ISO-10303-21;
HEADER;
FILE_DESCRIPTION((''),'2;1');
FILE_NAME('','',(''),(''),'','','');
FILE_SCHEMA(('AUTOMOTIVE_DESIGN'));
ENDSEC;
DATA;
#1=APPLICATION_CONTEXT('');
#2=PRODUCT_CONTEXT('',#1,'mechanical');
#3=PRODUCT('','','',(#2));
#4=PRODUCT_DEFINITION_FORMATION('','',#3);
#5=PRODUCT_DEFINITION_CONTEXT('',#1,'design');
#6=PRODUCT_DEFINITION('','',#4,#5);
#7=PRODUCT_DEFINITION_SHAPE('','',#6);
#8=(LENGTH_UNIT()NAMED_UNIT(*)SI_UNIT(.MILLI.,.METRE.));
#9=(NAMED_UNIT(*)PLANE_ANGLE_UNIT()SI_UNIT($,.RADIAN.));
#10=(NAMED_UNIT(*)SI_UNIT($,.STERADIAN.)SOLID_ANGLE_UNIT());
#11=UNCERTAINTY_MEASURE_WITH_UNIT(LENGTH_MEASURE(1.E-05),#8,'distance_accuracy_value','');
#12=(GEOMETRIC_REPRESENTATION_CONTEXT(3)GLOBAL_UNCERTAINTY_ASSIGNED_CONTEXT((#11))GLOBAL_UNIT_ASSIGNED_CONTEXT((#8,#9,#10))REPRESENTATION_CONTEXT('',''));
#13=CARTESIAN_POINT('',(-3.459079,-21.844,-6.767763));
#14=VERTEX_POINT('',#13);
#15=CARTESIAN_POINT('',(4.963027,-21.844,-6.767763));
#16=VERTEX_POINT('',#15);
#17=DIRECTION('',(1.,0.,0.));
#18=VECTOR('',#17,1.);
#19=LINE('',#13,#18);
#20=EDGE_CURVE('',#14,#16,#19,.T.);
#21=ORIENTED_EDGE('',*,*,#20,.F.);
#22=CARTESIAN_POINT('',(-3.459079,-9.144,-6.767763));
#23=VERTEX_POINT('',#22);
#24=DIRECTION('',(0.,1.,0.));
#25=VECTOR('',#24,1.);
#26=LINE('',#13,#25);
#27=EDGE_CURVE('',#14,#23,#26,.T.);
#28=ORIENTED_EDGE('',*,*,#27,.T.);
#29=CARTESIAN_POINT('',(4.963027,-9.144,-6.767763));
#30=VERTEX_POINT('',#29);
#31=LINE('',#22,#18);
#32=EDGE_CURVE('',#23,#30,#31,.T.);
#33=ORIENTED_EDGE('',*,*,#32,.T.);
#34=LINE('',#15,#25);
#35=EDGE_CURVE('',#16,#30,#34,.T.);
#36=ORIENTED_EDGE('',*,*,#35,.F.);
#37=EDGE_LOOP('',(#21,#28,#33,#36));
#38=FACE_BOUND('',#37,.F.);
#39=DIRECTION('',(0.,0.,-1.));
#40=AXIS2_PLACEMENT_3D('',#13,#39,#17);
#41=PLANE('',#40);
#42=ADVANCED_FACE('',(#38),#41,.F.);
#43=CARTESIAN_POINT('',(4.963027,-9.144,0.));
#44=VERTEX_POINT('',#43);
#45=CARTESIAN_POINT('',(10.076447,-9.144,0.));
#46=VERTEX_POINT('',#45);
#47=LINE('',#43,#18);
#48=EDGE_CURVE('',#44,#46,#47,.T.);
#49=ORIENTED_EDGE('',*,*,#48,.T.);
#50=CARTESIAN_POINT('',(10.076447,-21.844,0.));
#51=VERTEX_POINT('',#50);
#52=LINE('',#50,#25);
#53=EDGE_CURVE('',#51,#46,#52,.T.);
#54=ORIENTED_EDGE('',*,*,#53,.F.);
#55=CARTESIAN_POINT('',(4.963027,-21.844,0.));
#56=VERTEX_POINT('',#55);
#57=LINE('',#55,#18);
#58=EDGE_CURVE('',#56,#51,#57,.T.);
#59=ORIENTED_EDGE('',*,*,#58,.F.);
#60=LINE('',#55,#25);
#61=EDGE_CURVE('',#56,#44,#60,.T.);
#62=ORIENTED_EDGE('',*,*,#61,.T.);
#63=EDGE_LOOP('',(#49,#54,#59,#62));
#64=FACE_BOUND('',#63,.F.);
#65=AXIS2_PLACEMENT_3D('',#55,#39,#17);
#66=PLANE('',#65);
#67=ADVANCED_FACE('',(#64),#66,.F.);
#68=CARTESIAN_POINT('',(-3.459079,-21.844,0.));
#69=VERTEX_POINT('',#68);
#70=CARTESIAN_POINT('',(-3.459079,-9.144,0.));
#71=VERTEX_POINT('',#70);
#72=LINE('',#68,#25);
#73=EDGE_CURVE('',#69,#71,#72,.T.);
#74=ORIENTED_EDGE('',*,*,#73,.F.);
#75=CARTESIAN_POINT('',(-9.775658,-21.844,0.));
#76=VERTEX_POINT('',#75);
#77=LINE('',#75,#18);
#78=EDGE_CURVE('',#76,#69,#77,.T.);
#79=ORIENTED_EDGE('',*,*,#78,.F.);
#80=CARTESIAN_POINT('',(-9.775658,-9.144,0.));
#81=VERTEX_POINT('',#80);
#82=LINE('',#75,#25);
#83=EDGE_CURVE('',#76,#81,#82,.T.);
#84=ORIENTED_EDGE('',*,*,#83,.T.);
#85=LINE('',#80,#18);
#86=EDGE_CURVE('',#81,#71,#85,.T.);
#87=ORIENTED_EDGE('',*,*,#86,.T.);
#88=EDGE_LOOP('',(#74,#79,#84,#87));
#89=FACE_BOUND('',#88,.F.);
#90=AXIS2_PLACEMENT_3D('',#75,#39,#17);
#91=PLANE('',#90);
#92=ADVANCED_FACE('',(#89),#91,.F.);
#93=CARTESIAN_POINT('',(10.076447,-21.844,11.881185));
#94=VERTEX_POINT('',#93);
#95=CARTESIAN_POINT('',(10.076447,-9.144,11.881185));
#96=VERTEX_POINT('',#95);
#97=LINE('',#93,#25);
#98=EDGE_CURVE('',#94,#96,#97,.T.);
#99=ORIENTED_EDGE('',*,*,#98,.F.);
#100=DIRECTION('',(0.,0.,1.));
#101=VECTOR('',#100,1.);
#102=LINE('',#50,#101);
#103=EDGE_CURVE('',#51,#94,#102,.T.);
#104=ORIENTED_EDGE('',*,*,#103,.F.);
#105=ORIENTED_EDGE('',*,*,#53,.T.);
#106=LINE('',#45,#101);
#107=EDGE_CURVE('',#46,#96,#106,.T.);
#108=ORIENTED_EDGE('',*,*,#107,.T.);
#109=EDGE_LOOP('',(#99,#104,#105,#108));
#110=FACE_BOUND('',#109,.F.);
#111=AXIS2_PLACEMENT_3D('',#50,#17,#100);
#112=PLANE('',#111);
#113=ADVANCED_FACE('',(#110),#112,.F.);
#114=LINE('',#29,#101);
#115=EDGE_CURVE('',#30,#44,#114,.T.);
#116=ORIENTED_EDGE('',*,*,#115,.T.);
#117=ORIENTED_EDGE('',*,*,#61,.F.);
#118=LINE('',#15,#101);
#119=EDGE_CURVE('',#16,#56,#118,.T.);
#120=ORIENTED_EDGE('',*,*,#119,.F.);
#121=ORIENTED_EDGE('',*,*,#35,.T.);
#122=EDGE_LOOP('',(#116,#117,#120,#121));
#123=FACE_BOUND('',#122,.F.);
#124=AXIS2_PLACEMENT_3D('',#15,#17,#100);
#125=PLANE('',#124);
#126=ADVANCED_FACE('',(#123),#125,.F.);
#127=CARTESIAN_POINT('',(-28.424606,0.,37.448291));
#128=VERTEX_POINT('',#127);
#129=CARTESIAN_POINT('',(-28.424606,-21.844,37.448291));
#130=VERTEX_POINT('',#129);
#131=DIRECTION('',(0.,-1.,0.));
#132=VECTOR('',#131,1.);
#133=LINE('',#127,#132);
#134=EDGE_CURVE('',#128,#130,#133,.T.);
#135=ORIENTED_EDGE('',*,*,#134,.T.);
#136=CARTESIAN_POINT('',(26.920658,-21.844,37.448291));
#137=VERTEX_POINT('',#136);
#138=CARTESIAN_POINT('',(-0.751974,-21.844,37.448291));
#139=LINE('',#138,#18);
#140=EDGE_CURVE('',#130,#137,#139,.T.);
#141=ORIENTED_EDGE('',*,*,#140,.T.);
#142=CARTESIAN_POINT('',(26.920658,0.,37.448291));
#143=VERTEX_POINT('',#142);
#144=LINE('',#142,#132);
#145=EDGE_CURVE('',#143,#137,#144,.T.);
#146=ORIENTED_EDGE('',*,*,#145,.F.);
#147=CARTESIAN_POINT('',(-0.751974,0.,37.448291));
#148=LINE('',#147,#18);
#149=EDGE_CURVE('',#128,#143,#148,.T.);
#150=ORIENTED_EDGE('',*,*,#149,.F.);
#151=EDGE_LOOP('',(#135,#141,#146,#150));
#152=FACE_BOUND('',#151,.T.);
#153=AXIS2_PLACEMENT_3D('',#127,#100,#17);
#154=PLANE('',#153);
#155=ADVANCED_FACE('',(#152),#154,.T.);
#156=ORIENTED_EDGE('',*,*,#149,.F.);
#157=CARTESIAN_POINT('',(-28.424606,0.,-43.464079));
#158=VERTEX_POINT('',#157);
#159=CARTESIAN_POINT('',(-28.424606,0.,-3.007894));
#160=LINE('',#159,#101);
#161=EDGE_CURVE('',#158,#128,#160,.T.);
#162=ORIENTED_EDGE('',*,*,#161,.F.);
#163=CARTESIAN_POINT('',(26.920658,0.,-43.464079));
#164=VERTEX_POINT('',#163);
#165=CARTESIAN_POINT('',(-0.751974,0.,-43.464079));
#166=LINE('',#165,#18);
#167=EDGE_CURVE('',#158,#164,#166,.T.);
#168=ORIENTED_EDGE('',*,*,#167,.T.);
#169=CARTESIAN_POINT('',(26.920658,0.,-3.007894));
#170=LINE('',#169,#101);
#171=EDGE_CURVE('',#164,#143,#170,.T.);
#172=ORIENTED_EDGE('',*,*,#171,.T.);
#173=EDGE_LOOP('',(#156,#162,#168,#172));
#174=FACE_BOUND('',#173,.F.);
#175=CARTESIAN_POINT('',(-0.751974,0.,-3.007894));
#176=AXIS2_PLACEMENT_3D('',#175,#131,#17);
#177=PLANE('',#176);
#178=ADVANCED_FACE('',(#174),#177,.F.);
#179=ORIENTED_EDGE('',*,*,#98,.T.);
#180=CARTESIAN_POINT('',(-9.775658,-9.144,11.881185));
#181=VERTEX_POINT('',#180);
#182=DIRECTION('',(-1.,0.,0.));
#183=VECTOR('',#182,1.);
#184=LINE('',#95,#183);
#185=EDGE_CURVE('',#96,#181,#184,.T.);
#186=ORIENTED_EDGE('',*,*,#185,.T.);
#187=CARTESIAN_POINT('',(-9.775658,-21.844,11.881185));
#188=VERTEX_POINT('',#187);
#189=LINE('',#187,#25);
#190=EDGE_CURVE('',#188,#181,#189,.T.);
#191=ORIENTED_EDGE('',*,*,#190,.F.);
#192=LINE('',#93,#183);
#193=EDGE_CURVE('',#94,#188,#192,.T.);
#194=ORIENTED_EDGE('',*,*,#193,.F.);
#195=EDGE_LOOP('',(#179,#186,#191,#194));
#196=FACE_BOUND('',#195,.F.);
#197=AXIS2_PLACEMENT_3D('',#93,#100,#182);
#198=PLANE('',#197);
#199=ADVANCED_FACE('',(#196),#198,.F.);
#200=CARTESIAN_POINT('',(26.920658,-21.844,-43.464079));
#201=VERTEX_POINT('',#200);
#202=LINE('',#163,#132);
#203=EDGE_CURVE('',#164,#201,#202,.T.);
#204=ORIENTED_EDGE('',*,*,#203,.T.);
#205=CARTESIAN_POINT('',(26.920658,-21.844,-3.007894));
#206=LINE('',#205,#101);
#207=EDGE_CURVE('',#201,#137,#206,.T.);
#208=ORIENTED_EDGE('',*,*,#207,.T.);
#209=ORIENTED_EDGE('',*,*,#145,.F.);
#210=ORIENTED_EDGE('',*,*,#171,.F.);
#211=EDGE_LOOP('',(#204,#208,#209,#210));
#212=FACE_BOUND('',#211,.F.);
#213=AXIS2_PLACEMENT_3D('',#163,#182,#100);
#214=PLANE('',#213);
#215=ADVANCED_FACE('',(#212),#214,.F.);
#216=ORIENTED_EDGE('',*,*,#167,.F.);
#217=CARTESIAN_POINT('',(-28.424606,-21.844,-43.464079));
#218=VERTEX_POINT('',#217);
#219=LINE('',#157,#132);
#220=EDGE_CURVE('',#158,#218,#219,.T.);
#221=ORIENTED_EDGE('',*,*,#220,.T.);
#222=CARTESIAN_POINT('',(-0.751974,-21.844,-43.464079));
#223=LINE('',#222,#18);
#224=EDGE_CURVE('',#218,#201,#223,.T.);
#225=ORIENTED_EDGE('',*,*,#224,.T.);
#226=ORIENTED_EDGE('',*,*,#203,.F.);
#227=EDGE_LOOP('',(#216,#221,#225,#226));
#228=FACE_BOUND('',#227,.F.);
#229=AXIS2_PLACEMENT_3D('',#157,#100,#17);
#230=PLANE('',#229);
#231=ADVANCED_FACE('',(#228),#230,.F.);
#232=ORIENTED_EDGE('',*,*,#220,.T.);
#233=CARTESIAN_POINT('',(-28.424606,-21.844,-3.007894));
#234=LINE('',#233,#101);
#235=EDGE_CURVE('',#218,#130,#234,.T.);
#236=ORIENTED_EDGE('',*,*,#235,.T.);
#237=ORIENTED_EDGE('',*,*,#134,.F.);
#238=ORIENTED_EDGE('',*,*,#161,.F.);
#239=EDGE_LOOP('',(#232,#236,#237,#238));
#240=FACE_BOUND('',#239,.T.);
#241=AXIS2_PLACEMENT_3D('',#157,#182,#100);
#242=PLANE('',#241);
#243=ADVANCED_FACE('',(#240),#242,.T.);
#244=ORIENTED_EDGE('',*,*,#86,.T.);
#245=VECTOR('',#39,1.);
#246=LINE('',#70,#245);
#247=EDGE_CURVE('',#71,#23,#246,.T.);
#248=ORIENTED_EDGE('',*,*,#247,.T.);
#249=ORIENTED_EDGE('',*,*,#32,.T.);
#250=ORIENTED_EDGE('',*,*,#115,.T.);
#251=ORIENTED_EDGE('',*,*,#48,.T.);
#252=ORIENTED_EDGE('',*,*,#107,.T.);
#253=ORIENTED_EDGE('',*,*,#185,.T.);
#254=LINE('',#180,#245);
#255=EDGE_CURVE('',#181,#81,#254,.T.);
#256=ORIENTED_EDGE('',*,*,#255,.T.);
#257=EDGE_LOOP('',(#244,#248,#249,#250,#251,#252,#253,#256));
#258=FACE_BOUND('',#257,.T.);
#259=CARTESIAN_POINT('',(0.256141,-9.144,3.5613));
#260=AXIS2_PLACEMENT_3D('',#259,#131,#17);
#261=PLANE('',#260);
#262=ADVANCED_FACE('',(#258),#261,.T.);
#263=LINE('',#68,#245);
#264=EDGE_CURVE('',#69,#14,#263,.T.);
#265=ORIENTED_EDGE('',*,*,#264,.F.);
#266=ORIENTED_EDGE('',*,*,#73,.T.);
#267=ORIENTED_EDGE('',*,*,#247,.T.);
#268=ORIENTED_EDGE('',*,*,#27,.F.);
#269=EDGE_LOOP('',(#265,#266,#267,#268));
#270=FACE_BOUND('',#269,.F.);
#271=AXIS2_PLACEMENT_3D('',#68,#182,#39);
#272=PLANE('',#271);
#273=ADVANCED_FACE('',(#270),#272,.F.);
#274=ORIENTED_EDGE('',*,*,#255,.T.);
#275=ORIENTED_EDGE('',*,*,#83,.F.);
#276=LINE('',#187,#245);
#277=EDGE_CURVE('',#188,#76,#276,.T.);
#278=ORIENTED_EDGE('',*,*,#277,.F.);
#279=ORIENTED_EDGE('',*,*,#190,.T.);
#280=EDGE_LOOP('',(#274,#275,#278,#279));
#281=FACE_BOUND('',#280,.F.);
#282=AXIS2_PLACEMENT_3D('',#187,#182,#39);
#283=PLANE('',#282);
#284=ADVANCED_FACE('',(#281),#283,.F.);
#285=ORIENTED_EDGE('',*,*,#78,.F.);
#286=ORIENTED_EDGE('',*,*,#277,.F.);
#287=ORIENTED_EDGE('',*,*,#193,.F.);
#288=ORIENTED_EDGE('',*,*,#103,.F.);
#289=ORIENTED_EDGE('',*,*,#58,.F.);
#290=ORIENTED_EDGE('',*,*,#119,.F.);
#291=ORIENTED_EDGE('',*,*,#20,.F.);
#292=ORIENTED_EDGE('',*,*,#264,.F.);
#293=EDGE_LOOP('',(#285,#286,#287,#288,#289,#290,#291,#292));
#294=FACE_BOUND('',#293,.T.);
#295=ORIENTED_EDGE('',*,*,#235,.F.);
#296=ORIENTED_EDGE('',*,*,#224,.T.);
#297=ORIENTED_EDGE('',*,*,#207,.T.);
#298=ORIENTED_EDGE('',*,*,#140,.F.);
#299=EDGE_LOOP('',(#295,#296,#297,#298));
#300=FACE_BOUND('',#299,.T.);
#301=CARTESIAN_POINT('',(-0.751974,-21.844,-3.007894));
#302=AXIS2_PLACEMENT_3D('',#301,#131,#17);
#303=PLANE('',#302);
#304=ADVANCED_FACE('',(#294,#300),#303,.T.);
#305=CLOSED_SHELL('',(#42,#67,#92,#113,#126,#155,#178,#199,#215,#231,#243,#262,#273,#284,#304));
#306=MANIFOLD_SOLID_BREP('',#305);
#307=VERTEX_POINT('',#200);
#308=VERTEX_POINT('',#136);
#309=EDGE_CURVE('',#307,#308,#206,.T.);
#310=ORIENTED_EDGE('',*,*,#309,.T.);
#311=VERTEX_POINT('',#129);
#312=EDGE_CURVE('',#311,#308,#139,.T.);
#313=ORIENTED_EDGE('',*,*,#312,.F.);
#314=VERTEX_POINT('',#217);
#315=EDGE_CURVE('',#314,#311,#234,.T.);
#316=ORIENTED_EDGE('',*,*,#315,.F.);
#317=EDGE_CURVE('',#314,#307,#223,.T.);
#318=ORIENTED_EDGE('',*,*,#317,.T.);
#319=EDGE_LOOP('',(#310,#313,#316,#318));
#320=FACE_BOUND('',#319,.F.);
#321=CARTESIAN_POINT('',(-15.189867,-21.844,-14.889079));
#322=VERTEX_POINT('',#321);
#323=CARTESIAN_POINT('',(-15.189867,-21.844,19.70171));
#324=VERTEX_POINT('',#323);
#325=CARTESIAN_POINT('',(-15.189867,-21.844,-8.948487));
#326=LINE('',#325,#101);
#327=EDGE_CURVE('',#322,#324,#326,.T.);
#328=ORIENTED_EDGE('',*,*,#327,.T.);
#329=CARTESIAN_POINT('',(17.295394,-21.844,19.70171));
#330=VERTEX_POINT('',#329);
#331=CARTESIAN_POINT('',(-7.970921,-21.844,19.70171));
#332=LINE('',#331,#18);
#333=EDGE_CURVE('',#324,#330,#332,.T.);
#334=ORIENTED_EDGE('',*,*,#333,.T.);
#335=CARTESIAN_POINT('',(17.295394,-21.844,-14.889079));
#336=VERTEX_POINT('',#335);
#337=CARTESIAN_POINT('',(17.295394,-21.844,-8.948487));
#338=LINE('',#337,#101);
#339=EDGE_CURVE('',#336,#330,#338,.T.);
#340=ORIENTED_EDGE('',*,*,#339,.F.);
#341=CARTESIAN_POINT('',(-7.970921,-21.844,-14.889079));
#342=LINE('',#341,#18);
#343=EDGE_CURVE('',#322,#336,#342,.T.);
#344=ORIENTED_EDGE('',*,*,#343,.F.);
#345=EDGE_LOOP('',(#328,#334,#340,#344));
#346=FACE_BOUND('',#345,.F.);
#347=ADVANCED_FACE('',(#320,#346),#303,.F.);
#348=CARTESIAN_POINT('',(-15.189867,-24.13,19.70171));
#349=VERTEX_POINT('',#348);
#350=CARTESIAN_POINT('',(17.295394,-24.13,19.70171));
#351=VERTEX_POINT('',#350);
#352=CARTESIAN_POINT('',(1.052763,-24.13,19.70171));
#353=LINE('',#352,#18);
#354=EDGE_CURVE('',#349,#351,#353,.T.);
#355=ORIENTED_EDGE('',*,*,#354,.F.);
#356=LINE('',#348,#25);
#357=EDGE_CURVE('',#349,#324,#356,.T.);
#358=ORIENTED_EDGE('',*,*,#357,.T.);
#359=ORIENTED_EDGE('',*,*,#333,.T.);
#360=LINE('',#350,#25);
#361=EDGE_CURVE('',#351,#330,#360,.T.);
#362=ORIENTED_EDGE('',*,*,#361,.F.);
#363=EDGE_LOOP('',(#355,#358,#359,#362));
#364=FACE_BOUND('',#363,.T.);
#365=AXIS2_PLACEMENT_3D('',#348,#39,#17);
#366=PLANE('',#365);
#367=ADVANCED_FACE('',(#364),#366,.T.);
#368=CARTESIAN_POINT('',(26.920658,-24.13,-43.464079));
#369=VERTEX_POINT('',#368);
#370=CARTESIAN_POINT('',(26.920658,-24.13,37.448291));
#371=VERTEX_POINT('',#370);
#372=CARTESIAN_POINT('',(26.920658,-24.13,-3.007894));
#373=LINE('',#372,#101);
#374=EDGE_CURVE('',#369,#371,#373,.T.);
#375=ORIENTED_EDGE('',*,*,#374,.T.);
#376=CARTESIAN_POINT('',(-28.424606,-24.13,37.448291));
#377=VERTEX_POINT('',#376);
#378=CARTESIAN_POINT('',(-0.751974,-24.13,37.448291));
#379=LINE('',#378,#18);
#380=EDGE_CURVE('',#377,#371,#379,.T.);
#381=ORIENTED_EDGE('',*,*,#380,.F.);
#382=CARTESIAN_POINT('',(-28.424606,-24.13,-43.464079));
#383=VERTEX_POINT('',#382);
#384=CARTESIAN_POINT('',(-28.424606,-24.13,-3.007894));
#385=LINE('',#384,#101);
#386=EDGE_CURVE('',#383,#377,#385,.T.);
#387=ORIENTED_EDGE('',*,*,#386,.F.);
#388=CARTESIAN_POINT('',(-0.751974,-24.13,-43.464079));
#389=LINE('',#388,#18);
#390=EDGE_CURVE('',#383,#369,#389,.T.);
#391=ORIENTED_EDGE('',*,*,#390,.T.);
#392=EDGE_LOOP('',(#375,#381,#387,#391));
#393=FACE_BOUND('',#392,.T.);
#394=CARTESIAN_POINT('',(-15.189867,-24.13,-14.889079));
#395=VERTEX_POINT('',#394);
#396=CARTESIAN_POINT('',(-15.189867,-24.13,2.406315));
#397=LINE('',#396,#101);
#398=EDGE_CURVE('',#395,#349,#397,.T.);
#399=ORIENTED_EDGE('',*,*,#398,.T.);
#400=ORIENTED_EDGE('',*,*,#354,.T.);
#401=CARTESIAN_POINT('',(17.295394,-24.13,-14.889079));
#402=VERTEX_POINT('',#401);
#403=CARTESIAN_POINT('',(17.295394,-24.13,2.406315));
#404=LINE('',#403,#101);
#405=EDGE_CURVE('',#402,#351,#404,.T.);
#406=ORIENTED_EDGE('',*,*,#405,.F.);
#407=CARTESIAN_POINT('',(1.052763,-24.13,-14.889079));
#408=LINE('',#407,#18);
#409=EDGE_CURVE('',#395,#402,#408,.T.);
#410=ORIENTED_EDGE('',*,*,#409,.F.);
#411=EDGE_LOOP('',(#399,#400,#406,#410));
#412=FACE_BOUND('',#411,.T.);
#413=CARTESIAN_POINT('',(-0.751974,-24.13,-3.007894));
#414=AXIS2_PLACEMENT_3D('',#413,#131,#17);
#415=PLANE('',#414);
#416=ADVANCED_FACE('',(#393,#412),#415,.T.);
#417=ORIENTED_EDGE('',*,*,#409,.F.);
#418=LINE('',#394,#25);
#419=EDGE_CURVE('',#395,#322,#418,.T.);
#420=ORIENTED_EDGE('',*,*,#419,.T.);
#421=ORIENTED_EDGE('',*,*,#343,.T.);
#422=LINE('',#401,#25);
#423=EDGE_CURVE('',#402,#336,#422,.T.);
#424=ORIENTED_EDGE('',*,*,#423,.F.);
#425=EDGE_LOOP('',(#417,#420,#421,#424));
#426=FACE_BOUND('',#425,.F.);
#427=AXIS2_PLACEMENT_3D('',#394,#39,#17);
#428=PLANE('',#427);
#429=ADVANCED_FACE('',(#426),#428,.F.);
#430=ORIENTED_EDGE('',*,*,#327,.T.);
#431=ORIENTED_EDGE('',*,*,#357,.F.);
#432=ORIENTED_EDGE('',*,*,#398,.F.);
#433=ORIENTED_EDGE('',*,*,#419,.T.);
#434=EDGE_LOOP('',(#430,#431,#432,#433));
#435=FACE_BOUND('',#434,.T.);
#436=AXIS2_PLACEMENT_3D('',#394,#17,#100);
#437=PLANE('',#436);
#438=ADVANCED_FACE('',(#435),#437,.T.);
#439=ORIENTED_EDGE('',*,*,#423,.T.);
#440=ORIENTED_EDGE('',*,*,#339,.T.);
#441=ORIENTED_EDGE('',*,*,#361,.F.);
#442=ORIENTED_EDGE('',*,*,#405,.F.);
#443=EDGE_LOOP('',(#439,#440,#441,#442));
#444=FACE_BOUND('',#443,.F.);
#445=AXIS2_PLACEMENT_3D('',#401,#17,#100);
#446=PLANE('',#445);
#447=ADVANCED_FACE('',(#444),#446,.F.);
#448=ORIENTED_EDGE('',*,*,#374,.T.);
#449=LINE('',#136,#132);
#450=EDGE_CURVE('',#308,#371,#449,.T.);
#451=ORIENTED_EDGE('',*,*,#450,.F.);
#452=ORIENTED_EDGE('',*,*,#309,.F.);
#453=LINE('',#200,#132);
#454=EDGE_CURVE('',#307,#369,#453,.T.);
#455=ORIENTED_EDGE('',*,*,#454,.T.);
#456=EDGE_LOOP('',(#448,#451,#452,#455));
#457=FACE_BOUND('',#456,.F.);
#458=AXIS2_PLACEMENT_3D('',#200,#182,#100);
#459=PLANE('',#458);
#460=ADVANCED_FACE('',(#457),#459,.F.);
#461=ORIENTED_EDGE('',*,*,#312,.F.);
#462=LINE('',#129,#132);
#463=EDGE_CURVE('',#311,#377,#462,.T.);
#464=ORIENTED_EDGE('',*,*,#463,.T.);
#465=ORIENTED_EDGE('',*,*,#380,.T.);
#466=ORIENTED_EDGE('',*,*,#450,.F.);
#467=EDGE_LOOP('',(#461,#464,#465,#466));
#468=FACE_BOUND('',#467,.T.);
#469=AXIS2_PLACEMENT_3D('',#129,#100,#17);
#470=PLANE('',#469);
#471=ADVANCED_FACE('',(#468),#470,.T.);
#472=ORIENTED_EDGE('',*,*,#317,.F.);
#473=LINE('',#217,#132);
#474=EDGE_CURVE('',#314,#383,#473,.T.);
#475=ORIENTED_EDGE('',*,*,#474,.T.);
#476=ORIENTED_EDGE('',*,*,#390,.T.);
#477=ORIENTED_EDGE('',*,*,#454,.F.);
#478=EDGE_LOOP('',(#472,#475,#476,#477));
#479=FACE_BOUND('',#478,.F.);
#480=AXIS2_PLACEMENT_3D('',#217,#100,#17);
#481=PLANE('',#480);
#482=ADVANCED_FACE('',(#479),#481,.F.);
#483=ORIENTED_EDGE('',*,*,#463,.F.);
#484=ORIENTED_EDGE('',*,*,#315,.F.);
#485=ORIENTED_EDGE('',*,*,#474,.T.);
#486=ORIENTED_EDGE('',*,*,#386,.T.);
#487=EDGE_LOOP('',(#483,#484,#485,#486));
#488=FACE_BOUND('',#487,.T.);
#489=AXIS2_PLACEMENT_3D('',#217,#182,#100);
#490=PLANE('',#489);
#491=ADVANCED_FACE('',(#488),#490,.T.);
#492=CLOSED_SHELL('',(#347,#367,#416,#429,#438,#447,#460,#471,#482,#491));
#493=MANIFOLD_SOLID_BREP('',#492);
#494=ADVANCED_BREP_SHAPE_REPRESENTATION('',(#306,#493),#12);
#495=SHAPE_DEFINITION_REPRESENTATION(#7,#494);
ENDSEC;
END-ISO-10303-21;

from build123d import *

# Parameters (mm, degrees)
F0_W     = 55.3452633321
F0_H     = 80.9123702347
F1_DEPTH = 21.844
F3_DEPTH = 12.7
F4_W     = 55.3452633321
F4_H     = 80.9123702347
F5_DEPTH = 2.286
F6_W     = 32.4852615595
F6_H     = 34.5907891169
F7_DEPTH = 25.4


with BuildPart() as f1:
    # F0 (on Front) → F1 (new body)
    with BuildSketch(Plane.XZ):
        with Locations((-0.7519740611, -3.0078943819)):
            Rectangle(F0_W, F0_H)
    extrude(amount=F1_DEPTH)

    # F2 (on face) → F3 (cut)
    with BuildSketch(Plane.XZ.offset(21.844)):
        Polygon((10.07644739, 11.8811847642), (-9.7756581381, 11.8811847642), (-9.7756581381, 0), (-3.4590791911, 0), (-3.4590791911, -6.7677632906), (4.9630273134, -6.7677632906), (4.9630273134, 0), (10.07644739, 0), align=None)
    extrude(amount=-F3_DEPTH, mode=Mode.SUBTRACT)


with BuildPart() as f5:
    # F4 (on face) → F5 (new body)
    with BuildSketch(Plane.XZ.offset(21.844)):
        with Locations((-0.7519740611, -3.0078943819)):
            Rectangle(F4_W, F4_H)
    extrude(amount=F5_DEPTH)

    # F6 (on face) → F7 (cut)
    with BuildSketch(Plane.XZ.offset(24.13)):
        with Locations((1.0527633131, 2.4063154124)):
            Rectangle(F6_W, F6_H)
    extrude(amount=-F7_DEPTH, mode=Mode.SUBTRACT)


solid = Compound([f1.part, f5.part])
